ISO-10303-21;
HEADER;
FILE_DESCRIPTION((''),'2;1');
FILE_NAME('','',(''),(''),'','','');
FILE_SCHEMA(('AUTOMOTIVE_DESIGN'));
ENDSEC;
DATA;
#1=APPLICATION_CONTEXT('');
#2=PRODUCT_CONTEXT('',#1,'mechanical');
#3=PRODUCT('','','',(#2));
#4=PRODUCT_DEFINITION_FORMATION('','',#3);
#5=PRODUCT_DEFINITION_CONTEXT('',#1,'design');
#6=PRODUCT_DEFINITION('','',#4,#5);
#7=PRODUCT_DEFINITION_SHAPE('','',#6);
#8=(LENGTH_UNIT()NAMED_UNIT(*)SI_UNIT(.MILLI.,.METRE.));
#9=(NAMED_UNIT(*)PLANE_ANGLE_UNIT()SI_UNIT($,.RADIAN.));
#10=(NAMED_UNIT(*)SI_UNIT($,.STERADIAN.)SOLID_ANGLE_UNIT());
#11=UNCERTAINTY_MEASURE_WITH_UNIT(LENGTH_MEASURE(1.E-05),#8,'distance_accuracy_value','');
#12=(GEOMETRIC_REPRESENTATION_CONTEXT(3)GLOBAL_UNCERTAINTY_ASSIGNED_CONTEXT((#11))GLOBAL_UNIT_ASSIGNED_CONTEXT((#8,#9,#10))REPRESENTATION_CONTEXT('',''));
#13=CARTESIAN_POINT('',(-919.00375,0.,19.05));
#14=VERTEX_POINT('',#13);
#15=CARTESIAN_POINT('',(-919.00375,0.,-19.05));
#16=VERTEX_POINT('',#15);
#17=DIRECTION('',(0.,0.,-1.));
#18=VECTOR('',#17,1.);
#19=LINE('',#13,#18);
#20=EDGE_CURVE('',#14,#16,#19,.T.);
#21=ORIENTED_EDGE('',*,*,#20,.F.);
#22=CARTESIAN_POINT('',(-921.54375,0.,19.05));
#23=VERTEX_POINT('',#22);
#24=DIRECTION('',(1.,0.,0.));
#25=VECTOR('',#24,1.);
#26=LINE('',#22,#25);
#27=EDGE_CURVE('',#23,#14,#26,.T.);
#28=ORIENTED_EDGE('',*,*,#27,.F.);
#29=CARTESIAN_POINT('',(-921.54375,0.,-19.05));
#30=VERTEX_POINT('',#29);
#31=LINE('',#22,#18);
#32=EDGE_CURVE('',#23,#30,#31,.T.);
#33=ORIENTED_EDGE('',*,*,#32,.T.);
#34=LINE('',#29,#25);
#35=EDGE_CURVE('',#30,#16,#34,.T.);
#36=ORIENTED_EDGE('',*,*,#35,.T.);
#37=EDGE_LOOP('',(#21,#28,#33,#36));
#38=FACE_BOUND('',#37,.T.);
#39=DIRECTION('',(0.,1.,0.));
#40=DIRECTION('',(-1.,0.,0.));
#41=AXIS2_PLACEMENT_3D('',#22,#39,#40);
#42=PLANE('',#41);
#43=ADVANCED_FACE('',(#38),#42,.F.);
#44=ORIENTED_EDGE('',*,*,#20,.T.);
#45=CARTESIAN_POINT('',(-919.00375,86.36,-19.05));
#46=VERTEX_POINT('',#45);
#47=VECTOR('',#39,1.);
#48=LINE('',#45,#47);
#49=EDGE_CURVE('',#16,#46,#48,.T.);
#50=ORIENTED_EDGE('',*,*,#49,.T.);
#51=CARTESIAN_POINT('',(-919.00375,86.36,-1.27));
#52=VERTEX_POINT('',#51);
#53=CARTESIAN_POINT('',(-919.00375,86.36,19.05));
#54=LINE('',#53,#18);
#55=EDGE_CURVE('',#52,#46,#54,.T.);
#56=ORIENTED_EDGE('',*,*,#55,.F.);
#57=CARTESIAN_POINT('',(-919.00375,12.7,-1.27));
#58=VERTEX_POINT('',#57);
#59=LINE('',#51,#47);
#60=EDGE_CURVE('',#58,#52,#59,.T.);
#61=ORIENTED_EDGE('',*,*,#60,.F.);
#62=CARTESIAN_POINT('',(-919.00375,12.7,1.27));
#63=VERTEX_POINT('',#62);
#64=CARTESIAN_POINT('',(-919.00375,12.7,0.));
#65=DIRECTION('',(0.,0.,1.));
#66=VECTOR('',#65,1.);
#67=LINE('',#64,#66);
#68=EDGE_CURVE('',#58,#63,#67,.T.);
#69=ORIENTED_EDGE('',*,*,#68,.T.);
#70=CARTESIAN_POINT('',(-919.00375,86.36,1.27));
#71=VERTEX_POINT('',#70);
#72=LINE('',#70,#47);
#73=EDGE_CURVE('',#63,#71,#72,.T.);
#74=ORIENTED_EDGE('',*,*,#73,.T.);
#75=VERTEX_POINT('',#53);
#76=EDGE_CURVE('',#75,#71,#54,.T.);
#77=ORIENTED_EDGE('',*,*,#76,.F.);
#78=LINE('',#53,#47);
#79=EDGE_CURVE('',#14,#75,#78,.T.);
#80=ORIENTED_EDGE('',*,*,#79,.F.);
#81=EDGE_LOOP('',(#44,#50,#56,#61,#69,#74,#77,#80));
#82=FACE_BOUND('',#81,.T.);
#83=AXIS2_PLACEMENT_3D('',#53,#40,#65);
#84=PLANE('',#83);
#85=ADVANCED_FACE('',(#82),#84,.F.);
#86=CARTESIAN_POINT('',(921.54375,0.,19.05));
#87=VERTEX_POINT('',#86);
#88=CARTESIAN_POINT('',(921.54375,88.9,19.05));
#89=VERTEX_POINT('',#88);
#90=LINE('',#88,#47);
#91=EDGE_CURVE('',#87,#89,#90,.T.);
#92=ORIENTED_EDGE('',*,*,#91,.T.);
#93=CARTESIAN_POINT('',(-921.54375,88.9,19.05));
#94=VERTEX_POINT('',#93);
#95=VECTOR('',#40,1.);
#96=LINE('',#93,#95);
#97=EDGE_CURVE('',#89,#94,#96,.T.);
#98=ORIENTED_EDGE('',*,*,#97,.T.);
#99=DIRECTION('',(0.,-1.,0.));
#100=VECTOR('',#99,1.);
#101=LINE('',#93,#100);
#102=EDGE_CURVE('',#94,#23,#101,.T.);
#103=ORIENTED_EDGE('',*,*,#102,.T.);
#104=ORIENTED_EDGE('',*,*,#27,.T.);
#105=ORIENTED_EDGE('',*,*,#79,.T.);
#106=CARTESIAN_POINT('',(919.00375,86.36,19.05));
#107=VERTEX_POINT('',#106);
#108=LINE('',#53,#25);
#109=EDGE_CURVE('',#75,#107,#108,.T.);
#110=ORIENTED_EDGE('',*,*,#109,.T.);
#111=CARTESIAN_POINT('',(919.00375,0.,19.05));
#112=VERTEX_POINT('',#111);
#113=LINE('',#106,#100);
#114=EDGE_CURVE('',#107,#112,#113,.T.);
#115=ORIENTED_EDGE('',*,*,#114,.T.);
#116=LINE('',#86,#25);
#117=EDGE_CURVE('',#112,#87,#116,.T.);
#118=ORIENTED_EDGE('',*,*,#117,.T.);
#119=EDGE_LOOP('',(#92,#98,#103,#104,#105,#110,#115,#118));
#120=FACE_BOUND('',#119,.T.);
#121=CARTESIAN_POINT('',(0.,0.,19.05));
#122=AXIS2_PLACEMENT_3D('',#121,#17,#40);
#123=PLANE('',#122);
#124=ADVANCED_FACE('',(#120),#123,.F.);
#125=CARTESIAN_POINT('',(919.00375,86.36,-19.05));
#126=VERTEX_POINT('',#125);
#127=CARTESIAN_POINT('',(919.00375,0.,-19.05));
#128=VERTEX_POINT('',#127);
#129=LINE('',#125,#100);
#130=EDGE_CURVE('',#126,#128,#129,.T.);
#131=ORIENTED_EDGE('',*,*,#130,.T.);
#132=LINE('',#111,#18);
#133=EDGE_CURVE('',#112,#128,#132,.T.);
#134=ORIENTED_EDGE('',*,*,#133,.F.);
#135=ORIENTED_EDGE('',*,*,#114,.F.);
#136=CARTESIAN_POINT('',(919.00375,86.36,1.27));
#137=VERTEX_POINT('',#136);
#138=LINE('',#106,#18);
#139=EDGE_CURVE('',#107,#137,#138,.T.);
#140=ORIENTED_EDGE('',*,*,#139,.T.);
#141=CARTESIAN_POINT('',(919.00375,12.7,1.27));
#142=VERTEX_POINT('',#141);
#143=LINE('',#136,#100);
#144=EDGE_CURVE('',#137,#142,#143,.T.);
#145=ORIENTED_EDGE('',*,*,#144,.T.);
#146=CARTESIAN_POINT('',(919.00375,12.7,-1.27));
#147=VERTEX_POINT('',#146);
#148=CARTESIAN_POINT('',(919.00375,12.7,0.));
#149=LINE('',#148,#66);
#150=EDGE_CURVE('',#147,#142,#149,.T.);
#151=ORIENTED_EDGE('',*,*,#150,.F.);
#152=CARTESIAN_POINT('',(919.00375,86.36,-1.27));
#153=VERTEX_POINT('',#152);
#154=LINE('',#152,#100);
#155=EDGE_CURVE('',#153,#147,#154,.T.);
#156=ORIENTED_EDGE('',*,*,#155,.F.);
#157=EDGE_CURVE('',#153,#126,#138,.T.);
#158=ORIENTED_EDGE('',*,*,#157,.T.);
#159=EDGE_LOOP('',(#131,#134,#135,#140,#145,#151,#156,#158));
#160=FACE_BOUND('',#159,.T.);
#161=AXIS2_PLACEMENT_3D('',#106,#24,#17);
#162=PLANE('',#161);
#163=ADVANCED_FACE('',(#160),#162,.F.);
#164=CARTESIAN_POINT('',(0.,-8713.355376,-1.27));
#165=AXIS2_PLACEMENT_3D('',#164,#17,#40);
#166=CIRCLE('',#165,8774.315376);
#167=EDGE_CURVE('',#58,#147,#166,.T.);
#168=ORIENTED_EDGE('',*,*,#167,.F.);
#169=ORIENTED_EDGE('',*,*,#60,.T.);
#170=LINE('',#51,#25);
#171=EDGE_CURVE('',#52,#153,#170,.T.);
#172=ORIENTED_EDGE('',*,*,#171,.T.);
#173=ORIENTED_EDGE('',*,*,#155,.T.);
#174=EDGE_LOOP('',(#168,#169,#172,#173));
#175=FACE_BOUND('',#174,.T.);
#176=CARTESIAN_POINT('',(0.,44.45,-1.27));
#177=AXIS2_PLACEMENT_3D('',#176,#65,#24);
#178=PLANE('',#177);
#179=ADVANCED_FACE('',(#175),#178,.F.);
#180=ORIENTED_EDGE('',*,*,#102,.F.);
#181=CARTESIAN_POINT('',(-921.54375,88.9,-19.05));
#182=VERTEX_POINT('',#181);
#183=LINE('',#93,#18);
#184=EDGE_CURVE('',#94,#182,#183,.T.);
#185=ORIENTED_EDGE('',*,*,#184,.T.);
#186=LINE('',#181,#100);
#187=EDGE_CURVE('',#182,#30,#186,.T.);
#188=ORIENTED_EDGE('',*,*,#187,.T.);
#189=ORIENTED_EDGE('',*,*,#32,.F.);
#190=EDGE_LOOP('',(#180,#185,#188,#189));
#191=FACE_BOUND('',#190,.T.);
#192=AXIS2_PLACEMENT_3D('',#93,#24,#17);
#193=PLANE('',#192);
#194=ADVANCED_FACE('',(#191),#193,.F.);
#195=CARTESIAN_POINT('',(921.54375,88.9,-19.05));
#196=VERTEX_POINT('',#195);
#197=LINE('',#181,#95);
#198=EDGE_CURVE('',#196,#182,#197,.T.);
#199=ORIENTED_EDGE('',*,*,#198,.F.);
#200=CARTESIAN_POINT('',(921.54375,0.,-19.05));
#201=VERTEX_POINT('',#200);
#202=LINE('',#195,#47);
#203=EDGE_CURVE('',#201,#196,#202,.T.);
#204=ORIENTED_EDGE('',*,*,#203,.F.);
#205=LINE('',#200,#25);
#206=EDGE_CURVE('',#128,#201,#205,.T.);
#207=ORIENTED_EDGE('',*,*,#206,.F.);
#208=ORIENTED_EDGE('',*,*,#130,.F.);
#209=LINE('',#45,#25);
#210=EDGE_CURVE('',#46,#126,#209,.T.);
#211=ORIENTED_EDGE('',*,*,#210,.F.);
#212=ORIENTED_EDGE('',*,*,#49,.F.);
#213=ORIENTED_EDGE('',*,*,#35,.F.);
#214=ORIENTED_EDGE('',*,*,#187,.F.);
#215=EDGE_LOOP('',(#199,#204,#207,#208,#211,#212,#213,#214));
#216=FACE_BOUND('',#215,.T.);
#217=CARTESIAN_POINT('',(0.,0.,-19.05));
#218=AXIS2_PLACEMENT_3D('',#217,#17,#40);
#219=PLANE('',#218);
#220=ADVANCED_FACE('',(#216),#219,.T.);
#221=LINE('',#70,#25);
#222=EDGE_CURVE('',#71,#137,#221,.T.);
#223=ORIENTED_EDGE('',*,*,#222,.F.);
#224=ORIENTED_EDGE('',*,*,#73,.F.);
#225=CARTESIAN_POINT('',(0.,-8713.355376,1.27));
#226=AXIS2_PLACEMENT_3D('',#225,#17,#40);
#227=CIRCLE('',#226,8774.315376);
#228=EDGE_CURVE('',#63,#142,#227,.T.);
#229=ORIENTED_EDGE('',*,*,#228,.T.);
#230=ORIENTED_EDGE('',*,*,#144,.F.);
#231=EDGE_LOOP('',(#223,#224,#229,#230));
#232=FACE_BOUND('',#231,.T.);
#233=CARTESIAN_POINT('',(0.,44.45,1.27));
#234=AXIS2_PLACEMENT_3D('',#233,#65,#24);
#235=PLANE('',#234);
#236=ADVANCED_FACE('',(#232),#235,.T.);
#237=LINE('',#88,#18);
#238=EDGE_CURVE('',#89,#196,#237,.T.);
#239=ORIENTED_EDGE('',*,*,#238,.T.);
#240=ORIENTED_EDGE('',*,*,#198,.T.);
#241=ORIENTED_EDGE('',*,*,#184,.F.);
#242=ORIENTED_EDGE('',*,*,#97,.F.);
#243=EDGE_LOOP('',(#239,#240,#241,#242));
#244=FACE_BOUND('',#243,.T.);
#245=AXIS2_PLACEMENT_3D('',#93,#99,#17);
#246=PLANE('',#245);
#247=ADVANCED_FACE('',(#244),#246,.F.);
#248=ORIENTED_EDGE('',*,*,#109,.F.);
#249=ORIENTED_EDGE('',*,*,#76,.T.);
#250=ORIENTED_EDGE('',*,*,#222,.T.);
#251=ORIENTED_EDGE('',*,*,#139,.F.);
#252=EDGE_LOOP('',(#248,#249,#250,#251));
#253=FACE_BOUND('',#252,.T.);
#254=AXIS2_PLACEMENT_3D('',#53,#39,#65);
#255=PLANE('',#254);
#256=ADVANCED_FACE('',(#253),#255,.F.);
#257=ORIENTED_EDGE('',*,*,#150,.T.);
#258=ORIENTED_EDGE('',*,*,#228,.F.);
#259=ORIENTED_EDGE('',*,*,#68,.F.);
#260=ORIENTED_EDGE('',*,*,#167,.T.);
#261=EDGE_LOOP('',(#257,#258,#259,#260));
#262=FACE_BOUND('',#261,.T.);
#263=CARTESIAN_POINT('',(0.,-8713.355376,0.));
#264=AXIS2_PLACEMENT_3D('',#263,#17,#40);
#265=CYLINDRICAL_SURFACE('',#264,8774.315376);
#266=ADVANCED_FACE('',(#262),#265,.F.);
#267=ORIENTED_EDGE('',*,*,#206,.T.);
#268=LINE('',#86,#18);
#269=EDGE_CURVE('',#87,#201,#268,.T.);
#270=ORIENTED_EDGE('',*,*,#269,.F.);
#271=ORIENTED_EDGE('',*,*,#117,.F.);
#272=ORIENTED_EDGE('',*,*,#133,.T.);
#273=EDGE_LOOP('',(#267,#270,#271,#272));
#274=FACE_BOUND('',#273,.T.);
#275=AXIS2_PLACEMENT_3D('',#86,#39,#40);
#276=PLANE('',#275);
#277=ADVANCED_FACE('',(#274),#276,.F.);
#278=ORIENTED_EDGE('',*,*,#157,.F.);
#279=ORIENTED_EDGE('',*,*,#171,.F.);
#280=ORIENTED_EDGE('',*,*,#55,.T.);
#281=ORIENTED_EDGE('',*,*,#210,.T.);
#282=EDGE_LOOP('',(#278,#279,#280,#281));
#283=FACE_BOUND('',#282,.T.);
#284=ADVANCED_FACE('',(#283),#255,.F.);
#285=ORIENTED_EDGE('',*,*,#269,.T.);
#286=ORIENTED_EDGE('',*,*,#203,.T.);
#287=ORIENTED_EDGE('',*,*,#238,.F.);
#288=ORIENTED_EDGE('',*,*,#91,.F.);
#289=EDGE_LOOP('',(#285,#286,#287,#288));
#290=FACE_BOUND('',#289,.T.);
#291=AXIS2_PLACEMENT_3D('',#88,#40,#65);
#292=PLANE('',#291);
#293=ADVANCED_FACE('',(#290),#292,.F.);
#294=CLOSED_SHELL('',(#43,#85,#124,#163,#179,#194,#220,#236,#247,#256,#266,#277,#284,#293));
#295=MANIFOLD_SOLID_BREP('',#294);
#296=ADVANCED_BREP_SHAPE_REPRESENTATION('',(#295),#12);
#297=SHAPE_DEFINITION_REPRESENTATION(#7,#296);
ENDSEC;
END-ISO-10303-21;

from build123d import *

# Parameters (mm, degrees)
BOSS_EXTRUDE1_DEPTH = 19.05
RIB1_START          = -1.27
RIB1_DEPTH          = 2.54


# Read off the part's stored shape, not the designer's step: Rib1
with BuildPart() as part:
    # Sketch1 → Boss-Extrude1 (new, symmetric)
    with BuildSketch(Plane.XY):
        Polygon((-921.54375, 88.9), (921.54375, 88.9), (921.54375, 0), (919.00375, 0), (919.00375, 86.36), (-919.00375, 86.36), (-919.00375, 0), (-921.54375, 0), align=None)
    extrude(amount=BOSS_EXTRUDE1_DEPTH, both=True)

    # Rib1 outline → Rib1 (add)
    with BuildSketch(Plane.XY.offset(RIB1_START)):
        with BuildLine():
            Line((-919.00375, 86.36), (-919.00375, 12.7))
            ThreePointArc((-919.00375, 12.7), (0, 60.96), (919.00375, 12.7))
            Line((919.00375, 12.7), (919.00375, 86.36))
            Line((919.00375, 86.36), (-919.00375, 86.36))
        make_face()
    extrude(amount=RIB1_DEPTH)


solid = part.part
